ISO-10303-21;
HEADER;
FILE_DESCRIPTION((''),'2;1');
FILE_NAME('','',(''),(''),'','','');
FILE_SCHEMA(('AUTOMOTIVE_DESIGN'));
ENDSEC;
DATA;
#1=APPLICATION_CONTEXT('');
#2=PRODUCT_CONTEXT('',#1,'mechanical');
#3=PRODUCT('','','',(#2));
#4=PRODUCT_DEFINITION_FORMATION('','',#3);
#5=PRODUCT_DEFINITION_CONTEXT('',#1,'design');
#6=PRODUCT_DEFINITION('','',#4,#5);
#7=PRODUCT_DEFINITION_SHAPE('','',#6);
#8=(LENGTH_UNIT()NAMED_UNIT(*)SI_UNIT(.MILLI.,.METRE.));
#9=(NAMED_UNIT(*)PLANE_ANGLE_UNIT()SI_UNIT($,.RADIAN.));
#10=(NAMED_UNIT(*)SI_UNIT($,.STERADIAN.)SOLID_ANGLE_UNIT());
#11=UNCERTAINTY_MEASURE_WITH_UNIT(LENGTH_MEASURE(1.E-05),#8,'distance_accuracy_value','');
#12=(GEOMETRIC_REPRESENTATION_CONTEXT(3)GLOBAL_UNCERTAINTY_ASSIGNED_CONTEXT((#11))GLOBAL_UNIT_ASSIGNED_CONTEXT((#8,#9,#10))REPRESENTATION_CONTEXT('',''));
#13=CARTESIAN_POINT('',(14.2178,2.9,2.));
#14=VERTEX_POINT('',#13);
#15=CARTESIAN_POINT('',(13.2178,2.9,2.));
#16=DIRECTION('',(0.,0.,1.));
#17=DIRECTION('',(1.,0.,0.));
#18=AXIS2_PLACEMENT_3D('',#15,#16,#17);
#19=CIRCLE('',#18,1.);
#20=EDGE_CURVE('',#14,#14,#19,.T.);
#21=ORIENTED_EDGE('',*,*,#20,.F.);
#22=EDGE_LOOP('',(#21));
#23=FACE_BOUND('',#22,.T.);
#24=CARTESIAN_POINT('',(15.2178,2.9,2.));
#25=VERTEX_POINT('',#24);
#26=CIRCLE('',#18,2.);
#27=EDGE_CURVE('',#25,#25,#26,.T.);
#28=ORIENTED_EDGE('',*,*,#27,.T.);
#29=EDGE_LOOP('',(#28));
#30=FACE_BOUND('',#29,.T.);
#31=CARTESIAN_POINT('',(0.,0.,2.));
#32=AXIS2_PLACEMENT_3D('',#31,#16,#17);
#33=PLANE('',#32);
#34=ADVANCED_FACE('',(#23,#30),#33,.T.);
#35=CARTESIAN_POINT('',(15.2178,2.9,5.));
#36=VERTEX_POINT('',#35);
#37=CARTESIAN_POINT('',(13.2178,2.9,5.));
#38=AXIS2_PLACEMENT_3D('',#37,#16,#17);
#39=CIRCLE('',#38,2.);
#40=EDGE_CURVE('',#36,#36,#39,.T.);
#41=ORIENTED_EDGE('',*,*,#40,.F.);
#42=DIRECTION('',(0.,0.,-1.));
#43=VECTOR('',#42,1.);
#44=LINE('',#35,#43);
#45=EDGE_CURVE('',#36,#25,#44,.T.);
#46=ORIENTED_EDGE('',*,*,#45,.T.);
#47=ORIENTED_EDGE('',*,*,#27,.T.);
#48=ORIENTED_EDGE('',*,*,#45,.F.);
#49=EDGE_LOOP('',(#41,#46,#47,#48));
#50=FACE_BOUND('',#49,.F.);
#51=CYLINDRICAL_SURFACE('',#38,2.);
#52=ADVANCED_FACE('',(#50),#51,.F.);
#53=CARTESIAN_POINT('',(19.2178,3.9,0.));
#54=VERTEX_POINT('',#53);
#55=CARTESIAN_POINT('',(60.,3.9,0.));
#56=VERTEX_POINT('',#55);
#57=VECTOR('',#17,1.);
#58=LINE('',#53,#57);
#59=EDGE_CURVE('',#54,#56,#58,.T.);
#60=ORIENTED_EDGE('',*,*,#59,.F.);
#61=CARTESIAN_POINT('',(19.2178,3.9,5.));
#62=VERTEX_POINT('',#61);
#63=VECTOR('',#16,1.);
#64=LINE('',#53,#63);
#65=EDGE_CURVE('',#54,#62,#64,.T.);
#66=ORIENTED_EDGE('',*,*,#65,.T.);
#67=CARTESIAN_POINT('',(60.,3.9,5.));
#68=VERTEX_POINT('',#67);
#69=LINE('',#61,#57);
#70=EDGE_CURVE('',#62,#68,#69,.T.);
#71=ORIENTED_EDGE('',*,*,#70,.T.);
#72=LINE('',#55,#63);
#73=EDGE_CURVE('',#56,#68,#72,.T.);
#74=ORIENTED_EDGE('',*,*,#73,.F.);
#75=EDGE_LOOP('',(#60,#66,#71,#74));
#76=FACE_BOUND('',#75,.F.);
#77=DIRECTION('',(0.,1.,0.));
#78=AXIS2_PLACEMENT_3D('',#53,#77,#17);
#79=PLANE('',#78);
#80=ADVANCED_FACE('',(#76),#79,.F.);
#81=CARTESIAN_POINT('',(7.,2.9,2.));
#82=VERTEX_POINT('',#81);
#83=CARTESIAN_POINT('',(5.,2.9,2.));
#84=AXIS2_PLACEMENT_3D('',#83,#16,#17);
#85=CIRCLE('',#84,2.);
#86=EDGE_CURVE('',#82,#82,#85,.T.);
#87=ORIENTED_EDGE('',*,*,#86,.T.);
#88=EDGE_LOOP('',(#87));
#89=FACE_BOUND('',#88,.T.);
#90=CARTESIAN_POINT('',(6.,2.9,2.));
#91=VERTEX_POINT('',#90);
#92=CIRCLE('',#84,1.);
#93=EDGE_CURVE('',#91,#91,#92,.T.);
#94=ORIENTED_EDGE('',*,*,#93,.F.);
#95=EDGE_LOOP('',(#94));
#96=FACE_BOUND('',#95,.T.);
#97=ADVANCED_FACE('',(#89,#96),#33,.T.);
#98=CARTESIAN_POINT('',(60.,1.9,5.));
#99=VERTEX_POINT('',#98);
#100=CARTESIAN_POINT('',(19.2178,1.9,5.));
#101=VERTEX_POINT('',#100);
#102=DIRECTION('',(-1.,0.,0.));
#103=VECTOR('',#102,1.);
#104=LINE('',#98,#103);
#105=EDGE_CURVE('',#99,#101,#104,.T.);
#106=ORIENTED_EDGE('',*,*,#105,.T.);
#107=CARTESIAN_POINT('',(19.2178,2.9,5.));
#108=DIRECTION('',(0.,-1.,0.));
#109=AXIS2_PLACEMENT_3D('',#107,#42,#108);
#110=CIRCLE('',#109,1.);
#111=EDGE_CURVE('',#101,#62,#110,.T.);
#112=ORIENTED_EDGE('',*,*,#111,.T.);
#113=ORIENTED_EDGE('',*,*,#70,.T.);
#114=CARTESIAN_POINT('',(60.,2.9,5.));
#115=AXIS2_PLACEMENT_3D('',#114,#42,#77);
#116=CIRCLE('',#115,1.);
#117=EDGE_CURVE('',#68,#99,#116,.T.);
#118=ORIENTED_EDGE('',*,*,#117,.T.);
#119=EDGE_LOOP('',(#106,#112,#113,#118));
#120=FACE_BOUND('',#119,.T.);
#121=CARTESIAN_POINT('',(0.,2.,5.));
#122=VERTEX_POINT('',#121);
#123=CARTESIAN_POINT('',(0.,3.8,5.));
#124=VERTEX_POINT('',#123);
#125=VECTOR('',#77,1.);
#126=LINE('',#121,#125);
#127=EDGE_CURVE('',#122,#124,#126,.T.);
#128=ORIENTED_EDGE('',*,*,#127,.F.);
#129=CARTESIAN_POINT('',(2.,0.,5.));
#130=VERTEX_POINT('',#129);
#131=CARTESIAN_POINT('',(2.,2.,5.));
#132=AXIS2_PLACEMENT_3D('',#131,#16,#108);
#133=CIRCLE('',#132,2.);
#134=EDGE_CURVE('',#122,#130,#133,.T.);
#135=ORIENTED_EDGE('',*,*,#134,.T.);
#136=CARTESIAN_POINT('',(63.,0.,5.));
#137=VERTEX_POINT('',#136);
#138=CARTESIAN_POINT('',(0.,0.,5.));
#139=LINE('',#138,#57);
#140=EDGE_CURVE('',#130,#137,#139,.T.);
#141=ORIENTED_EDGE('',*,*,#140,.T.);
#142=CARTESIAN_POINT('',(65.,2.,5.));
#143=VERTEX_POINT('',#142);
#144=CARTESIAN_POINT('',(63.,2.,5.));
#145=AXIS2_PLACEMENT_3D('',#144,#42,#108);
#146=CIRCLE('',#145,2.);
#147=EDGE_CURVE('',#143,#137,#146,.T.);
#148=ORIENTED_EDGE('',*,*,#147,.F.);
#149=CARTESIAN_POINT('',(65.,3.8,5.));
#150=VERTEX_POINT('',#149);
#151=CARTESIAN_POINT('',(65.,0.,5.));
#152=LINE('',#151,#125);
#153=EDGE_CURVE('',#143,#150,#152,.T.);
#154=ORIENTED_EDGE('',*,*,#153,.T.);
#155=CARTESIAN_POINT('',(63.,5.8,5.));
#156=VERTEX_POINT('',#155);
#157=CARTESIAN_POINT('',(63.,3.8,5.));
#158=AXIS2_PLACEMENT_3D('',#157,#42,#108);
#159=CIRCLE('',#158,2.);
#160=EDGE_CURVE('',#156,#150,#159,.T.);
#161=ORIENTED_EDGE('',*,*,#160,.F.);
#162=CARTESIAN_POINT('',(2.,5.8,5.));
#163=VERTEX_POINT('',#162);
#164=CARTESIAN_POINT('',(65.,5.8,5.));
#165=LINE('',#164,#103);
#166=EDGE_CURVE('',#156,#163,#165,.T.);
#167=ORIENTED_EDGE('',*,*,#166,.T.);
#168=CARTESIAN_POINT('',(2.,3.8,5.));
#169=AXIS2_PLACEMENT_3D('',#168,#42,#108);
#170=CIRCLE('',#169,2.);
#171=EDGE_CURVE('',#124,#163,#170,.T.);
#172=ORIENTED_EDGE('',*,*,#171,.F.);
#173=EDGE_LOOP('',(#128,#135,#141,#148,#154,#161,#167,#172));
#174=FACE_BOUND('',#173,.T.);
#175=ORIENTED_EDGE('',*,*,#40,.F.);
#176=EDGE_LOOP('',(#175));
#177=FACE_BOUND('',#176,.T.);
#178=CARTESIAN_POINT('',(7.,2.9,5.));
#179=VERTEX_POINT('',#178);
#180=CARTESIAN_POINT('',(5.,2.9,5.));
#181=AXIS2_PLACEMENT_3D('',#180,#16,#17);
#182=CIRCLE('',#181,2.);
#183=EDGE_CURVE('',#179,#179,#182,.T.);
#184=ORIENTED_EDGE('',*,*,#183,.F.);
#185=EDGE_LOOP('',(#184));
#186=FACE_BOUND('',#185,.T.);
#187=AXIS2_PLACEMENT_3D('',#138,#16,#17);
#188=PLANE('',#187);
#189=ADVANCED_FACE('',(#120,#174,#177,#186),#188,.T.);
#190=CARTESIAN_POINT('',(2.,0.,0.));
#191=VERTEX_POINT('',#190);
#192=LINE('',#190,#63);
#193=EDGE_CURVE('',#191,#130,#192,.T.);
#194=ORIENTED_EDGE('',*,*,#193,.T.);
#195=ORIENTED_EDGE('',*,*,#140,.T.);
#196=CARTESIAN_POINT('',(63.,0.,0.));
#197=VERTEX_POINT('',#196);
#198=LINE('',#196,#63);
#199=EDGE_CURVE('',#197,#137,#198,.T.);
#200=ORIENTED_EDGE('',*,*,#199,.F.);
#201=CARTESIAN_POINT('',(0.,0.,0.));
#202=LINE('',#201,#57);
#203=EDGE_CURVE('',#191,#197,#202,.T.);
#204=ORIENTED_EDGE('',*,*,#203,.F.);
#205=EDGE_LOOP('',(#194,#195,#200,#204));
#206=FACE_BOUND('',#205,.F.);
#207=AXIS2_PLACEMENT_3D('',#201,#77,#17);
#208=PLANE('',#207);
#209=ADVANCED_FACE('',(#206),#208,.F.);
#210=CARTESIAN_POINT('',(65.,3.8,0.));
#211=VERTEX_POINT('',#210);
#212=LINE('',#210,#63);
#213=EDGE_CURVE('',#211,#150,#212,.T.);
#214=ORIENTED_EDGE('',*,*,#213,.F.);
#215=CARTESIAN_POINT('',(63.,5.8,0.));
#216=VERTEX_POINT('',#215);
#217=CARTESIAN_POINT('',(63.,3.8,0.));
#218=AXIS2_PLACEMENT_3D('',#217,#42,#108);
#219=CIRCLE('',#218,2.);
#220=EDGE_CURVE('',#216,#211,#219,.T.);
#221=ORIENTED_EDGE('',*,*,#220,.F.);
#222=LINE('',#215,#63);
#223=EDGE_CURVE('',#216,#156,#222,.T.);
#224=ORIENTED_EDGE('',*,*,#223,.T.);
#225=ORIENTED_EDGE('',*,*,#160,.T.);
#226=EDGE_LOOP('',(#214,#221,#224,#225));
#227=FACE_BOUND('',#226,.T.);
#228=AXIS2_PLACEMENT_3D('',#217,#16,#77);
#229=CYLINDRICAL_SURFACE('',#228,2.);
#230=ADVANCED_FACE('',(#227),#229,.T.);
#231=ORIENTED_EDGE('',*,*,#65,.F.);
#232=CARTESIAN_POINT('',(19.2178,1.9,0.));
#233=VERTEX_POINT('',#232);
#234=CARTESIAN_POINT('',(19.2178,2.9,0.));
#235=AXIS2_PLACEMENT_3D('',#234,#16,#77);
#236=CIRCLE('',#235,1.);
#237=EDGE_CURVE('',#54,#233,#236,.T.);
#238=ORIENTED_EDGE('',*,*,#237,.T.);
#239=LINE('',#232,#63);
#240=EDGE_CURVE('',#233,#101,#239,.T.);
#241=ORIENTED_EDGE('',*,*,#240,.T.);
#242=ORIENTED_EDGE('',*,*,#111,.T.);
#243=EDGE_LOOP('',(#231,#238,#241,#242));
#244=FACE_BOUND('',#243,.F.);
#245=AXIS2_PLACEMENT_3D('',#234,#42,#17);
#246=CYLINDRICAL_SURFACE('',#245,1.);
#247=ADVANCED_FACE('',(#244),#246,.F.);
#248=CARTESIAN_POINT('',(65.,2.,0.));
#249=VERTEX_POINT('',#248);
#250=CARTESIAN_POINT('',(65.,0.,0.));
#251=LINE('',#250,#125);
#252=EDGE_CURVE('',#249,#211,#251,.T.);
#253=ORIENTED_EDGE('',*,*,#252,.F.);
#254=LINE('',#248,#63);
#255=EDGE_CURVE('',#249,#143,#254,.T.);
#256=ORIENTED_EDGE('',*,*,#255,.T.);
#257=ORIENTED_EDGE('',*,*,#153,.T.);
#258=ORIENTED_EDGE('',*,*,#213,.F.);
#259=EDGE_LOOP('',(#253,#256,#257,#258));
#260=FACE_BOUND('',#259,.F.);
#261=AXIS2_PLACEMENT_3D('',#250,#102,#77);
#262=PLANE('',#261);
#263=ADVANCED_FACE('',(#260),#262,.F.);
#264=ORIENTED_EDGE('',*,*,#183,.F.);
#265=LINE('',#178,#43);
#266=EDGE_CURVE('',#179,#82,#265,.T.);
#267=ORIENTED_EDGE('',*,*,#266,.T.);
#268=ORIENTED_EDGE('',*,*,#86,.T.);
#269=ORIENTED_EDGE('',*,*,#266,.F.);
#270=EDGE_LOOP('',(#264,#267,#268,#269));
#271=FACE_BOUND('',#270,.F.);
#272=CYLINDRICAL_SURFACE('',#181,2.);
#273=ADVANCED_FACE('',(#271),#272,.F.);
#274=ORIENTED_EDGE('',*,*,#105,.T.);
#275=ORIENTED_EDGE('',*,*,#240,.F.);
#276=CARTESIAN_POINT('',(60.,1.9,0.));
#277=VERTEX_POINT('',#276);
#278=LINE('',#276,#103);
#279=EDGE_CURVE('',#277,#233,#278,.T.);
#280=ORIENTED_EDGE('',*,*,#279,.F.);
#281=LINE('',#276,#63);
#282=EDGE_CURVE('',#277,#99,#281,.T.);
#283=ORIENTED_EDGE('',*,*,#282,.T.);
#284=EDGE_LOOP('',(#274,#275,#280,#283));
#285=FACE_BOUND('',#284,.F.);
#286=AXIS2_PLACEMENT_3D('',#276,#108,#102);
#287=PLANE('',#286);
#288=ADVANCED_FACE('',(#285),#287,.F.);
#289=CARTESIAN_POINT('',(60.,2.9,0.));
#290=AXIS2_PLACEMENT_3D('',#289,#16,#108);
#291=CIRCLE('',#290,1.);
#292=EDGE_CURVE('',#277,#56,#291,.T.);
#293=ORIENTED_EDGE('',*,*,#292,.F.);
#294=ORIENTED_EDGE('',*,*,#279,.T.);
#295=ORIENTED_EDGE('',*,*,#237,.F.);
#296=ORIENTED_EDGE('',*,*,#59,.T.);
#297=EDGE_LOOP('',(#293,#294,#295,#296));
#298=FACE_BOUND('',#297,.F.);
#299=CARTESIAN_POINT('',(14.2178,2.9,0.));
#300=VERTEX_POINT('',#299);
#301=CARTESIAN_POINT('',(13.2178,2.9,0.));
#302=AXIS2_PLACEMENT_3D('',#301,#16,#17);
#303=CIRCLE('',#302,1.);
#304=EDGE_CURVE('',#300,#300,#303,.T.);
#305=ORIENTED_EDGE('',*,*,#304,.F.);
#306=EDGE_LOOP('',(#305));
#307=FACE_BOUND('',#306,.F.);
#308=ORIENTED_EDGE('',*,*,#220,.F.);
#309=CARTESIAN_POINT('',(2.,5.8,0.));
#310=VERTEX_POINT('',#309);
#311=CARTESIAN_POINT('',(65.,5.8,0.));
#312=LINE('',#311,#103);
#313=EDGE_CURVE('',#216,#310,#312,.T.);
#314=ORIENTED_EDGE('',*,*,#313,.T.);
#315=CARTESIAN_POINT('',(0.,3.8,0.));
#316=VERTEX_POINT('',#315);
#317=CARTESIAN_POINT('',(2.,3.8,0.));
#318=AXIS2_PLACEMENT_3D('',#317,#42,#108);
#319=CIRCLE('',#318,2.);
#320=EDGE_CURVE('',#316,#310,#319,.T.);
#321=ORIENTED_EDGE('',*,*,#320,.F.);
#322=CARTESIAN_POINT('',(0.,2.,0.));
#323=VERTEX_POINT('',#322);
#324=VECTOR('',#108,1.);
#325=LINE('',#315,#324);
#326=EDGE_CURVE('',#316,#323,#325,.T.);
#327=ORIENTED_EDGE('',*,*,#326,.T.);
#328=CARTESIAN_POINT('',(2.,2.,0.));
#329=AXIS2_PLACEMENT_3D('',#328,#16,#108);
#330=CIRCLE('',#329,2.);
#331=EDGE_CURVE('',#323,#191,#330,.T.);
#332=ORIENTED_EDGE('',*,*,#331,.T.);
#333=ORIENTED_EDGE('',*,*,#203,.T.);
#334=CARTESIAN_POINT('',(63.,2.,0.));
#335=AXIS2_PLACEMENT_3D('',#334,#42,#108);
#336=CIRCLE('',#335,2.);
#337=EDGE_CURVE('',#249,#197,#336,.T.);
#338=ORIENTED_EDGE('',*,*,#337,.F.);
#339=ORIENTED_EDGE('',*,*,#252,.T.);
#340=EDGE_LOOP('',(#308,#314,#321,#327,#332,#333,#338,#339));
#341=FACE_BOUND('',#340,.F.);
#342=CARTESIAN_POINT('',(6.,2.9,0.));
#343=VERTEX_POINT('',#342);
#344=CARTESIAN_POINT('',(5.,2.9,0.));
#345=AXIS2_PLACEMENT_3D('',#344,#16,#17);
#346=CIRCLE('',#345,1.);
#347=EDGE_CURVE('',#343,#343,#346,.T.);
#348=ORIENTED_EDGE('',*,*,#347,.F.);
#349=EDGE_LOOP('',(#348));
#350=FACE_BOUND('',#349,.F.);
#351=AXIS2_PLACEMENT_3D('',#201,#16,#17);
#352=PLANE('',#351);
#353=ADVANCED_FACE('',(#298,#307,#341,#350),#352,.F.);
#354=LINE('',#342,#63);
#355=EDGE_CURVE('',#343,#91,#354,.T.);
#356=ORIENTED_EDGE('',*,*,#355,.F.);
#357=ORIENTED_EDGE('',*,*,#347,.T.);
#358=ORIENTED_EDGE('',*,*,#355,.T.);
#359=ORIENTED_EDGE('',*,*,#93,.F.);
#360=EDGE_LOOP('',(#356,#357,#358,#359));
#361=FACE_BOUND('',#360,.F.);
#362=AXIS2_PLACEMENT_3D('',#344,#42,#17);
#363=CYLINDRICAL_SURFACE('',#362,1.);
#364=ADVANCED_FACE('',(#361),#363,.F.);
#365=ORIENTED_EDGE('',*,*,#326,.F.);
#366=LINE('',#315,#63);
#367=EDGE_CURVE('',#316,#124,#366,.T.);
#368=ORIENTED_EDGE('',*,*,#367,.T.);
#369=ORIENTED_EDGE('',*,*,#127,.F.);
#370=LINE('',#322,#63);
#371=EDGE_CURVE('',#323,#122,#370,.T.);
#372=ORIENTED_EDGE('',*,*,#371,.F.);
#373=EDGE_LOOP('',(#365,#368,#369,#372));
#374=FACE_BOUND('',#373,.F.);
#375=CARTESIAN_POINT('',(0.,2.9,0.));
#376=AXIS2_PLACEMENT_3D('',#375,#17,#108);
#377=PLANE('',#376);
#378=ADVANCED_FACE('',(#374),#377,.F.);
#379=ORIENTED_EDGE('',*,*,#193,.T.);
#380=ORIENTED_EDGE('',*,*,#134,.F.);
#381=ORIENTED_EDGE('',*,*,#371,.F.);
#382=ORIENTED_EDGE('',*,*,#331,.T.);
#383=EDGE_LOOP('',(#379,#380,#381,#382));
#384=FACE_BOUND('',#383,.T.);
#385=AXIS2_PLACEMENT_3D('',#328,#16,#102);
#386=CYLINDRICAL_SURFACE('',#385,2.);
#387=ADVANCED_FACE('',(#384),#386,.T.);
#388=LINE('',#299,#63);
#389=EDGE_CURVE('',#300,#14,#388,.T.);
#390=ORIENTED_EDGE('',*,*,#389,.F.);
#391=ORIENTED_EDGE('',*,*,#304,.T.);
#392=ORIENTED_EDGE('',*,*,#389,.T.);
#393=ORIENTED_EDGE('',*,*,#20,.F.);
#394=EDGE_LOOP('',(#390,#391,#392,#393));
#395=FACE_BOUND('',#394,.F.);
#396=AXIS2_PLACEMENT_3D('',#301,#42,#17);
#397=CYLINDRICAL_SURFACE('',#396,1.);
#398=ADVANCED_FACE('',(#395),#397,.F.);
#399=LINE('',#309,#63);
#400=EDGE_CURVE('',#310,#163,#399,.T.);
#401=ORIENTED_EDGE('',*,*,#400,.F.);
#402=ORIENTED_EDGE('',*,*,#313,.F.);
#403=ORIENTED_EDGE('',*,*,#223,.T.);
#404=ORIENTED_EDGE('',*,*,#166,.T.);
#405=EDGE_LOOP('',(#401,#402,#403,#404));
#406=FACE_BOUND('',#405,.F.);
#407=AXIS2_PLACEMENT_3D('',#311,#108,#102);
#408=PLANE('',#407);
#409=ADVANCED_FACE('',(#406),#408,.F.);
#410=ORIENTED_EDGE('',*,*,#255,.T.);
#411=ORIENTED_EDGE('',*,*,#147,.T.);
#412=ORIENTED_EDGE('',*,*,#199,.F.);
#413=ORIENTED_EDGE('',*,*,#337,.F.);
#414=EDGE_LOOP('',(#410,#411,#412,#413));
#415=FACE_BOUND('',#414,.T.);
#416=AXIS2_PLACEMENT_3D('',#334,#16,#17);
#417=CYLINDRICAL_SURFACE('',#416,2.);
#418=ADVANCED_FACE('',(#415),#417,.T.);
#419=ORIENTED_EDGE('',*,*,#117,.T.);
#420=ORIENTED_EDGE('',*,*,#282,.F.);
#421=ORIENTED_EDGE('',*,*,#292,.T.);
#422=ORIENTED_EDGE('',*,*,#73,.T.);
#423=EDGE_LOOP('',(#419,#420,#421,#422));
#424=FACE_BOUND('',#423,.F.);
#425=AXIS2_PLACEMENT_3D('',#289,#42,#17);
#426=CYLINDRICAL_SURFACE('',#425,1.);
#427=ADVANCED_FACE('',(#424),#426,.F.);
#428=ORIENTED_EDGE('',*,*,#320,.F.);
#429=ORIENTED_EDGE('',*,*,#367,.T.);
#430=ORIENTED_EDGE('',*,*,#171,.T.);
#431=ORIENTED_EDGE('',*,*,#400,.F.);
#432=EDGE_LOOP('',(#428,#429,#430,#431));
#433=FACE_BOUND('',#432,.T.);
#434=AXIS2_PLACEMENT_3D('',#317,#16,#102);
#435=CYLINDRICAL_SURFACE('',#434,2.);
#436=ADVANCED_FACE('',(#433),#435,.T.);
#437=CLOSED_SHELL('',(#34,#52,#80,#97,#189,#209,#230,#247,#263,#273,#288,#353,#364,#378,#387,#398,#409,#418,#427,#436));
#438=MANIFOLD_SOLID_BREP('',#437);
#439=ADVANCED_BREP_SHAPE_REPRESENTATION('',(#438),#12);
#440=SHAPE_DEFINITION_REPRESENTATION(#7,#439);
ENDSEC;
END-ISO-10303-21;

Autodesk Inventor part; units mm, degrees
ref_plane "YZ Plane" through (0, 0, 0) normal (1, 0, 0) x (0, 1, 0)
ref_plane "XZ Plane" through (0, 0, 0) normal (0, 1, 0) x (-1, 0, 0)
ref_plane "XY Plane" through (0, 0, 0) normal (0, 0, 1) x (1, 0, 0)
sketch "Sketch1" plane through (0, 0, 0) normal (0, 0, 1) x (1, 0, 0)
  line L0 (0, 0) -> (65, 0)
  line L1 (65, 0) -> (65, 5.8)
  line L2 (65, 5.8) -> (0, 5.8)
  line L3 (0, 5.8) -> (0, 0)
  line L4 (0, 0) -> (0, 2.9)
  line L5 (0, 2.9) -> (5, 2.9)
  line L6 (5, 2.9) -> (13.2178, 2.9)
  circle A0 centre (5, 2.9) radius 1
  circle A1 centre (13.2178, 2.9) radius 1
  line L7 (13.2178, 2.9) -> (19.2178, 2.9)
  line L8 (19.2178, 2.9) -> (60, 2.9)
  circle A2 centre (19.2178, 2.9) radius 1
  circle A3 centre (60, 2.9) radius 1
  line L9 (19.2178, 3.9) -> (60, 3.9)
  line L10 (60, 1.9) -> (19.2178, 1.9)
  point P0 (65, 2.9)
  dimension "d0" = 65
  dimension "d1" = 5.8
  dimension "d2" = 2.9
  dimension "d3" = 5
  dimension "d4" = 8.2178
  dimension "d5" = 2
  dimension "d6" = 2
  dimension "d7" = 6
  dimension "d8" = 5
  dimension "d9" = 2
  dimension "d10" = 2
extrude "Extrusion1" add sketch "Sketch1" along normal blind 5
fillet "Fillet1" radius 2 4 edges at (0, 5.8, 2.5) (65, 5.8, 2.5) (65, 0, 2.5) (0, 0, 2.5)
sketch "Sketch2" plane through (0, 0, 5) normal (0, 0, 1) x (1, 0, 0)
  arc A0 (0, 2) -> (2, 0) centre (2, 2) ccw projected
  line L0 (2, 0) -> (63, 0) projected
  arc A1 (63, 0) -> (65, 2) centre (63, 2) ccw projected
  line L1 (65, 2) -> (65, 3.8) projected
  arc A2 (65, 3.8) -> (63, 5.8) centre (63, 3.8) ccw projected
  line L2 (63, 5.8) -> (2, 5.8) projected
  arc A3 (2, 5.8) -> (0, 3.8) centre (2, 3.8) ccw projected
  line L3 (0, 3.8) -> (0, 2) projected
  arc A4 (19.2178, 3.9) -> (19.2178, 1.9) centre (19.2178, 2.9) ccw projected
  line L4 (19.2178, 3.9) -> (60, 3.9) projected
  arc A5 (60, 1.9) -> (60, 3.9) centre (60, 2.9) ccw projected
  line L5 (60, 1.9) -> (19.2178, 1.9) projected
  circle A6 centre (13.2178, 2.9) radius 1 projected
  circle A7 centre (5, 2.9) radius 1 projected
  circle A8 centre (5, 2.9) radius 2
  circle A9 centre (13.2178, 2.9) radius 2
  point P0 (0, 0)
  dimension "d14" = 4
  dimension "d15" = 4
extrude "Extrusion2" cut sketch "Sketch2" against normal blind 3 contours A7 | A8 | A9
equation "\"d2\" = 0.5 * d1"
equation "\"d6\" = d5"
equation "\"d7\" = d8 + 0.5 * d5"
equation "\"d9\" = d5"
equation "\"d10\" = d5"
equation "\"d15\" = d14"
properties part number "Locking Lever"
